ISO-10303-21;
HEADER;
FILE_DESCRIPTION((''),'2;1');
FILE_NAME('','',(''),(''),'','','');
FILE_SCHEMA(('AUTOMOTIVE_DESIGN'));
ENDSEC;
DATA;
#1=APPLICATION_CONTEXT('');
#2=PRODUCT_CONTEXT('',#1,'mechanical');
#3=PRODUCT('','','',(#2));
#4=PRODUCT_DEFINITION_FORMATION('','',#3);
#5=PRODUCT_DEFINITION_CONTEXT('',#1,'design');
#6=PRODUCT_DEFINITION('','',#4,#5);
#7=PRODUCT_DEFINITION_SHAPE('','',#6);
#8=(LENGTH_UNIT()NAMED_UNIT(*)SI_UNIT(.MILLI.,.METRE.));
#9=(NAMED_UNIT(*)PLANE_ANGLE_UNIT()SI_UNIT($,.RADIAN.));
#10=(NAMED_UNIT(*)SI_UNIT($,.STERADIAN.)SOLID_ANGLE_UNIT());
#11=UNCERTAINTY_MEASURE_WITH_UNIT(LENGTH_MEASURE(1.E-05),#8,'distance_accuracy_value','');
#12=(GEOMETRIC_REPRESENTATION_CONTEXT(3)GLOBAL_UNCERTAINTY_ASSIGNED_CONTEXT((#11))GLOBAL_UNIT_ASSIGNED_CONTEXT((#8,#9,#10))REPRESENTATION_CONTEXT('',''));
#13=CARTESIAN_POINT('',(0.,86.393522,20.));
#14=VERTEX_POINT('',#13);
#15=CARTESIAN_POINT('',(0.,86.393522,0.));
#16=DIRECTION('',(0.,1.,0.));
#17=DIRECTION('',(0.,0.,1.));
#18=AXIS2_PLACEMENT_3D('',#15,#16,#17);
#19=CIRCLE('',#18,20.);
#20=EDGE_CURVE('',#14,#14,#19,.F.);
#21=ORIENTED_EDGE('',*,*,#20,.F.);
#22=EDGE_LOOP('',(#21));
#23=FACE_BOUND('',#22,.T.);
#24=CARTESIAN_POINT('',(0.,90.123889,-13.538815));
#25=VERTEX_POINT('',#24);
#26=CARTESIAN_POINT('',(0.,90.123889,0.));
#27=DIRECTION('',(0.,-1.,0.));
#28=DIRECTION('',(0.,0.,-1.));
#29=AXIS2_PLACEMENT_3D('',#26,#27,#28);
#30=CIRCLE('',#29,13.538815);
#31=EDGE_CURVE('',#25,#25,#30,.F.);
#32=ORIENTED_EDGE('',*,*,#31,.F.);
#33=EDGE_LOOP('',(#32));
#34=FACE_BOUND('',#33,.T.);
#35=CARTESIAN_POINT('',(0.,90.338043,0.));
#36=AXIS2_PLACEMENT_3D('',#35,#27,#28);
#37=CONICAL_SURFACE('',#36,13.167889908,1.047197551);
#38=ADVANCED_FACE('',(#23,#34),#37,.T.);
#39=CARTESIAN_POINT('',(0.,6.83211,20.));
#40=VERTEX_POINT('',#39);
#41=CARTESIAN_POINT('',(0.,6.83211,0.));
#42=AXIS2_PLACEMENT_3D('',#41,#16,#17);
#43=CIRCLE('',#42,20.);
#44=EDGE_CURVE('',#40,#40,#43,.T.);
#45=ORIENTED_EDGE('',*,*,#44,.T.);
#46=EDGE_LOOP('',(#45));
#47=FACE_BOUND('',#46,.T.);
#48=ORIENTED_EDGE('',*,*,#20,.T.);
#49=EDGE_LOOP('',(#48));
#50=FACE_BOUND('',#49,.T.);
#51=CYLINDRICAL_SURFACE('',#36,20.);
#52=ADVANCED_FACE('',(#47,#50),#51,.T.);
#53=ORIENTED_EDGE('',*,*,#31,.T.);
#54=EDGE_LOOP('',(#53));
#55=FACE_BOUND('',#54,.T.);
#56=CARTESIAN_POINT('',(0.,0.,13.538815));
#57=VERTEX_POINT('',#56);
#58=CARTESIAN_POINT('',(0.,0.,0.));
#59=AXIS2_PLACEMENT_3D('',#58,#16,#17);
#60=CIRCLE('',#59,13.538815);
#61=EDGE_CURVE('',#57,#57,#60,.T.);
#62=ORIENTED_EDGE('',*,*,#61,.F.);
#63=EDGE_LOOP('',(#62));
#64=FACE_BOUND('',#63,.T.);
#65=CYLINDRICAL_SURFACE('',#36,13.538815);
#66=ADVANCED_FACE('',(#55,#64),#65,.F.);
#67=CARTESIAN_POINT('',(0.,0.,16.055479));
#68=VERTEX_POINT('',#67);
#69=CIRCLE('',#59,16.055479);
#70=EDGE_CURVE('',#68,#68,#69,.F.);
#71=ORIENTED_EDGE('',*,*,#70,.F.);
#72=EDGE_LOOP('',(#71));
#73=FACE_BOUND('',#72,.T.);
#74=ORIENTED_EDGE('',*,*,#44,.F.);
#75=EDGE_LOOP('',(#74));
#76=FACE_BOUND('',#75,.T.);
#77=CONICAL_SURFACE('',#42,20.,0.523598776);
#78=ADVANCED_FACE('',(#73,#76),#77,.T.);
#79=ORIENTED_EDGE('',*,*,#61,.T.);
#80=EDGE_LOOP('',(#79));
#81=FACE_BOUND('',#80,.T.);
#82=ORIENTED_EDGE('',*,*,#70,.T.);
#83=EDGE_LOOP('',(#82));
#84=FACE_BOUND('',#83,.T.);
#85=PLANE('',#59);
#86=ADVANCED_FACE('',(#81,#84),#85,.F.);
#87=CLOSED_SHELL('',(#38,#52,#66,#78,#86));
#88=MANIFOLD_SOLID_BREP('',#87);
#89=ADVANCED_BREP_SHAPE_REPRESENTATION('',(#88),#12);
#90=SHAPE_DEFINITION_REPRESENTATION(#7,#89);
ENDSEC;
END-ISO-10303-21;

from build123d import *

# Parameters (mm, degrees)
SKETCH1_R           = 20
BOSS_EXTRUDE1_DEPTH = 90.338043
SKETCH2_R           = 13.538814639
CUT_EXTRUDE1_DEPTH  = 95.662357952
CHAMFER1_SIZE       = 3.944521
CHAMFER1_SIZE_2     = 6.83211


with BuildPart() as part:
    # Sketch1 → Boss-Extrude1 (new body)
    with BuildSketch(Plane(origin=(0, 0, 0), x_dir=(1, 0, 0), z_dir=(0, 1, 0))):
        with Locations(Location((0, 0, 0), (0, 0, 270))):
            Circle(SKETCH1_R)
    extrude(amount=BOSS_EXTRUDE1_DEPTH)

    # Sketch2 → Cut-Extrude1 (cut, through all)
    with BuildSketch(Plane(origin=(0, 0, 0), x_dir=(1, 0, 0), z_dir=(0, 1, 0))):
        with Locations(Location((0, 0, 0), (0, 0, 270))):
            Circle(SKETCH2_R)
    extrude(amount=CUT_EXTRUDE1_DEPTH, mode=Mode.SUBTRACT)

    # Chamfer1
    # the kernel refuses this chamfer: 6.83211, 3.944521 mm, written as the material it takes off along each edge
    with BuildSketch(Plane(origin=(0, 90.338043, 0), x_dir=(0, 0, 1), z_dir=(-1, 0, 0))) as chamfer1_piece_1:
        Polygon((20, -CHAMFER1_SIZE), (20 - CHAMFER1_SIZE_2, 0), (20, 0), align=None)
    revolve(axis=Axis((0, 90.338043, 0), (0, 1, 0)), mode=Mode.SUBTRACT)
    with BuildSketch(Plane(origin=(0, 0, 0), x_dir=(0, 0, 1), z_dir=(-1, 0, 0))) as chamfer1_piece_2:
        Polygon((20, CHAMFER1_SIZE_2), (20 - CHAMFER1_SIZE, 0), (20, 0), align=None)
    revolve(axis=Axis((0, 0, 0), (0, 1, 0)), mode=Mode.SUBTRACT)


solid = part.part
